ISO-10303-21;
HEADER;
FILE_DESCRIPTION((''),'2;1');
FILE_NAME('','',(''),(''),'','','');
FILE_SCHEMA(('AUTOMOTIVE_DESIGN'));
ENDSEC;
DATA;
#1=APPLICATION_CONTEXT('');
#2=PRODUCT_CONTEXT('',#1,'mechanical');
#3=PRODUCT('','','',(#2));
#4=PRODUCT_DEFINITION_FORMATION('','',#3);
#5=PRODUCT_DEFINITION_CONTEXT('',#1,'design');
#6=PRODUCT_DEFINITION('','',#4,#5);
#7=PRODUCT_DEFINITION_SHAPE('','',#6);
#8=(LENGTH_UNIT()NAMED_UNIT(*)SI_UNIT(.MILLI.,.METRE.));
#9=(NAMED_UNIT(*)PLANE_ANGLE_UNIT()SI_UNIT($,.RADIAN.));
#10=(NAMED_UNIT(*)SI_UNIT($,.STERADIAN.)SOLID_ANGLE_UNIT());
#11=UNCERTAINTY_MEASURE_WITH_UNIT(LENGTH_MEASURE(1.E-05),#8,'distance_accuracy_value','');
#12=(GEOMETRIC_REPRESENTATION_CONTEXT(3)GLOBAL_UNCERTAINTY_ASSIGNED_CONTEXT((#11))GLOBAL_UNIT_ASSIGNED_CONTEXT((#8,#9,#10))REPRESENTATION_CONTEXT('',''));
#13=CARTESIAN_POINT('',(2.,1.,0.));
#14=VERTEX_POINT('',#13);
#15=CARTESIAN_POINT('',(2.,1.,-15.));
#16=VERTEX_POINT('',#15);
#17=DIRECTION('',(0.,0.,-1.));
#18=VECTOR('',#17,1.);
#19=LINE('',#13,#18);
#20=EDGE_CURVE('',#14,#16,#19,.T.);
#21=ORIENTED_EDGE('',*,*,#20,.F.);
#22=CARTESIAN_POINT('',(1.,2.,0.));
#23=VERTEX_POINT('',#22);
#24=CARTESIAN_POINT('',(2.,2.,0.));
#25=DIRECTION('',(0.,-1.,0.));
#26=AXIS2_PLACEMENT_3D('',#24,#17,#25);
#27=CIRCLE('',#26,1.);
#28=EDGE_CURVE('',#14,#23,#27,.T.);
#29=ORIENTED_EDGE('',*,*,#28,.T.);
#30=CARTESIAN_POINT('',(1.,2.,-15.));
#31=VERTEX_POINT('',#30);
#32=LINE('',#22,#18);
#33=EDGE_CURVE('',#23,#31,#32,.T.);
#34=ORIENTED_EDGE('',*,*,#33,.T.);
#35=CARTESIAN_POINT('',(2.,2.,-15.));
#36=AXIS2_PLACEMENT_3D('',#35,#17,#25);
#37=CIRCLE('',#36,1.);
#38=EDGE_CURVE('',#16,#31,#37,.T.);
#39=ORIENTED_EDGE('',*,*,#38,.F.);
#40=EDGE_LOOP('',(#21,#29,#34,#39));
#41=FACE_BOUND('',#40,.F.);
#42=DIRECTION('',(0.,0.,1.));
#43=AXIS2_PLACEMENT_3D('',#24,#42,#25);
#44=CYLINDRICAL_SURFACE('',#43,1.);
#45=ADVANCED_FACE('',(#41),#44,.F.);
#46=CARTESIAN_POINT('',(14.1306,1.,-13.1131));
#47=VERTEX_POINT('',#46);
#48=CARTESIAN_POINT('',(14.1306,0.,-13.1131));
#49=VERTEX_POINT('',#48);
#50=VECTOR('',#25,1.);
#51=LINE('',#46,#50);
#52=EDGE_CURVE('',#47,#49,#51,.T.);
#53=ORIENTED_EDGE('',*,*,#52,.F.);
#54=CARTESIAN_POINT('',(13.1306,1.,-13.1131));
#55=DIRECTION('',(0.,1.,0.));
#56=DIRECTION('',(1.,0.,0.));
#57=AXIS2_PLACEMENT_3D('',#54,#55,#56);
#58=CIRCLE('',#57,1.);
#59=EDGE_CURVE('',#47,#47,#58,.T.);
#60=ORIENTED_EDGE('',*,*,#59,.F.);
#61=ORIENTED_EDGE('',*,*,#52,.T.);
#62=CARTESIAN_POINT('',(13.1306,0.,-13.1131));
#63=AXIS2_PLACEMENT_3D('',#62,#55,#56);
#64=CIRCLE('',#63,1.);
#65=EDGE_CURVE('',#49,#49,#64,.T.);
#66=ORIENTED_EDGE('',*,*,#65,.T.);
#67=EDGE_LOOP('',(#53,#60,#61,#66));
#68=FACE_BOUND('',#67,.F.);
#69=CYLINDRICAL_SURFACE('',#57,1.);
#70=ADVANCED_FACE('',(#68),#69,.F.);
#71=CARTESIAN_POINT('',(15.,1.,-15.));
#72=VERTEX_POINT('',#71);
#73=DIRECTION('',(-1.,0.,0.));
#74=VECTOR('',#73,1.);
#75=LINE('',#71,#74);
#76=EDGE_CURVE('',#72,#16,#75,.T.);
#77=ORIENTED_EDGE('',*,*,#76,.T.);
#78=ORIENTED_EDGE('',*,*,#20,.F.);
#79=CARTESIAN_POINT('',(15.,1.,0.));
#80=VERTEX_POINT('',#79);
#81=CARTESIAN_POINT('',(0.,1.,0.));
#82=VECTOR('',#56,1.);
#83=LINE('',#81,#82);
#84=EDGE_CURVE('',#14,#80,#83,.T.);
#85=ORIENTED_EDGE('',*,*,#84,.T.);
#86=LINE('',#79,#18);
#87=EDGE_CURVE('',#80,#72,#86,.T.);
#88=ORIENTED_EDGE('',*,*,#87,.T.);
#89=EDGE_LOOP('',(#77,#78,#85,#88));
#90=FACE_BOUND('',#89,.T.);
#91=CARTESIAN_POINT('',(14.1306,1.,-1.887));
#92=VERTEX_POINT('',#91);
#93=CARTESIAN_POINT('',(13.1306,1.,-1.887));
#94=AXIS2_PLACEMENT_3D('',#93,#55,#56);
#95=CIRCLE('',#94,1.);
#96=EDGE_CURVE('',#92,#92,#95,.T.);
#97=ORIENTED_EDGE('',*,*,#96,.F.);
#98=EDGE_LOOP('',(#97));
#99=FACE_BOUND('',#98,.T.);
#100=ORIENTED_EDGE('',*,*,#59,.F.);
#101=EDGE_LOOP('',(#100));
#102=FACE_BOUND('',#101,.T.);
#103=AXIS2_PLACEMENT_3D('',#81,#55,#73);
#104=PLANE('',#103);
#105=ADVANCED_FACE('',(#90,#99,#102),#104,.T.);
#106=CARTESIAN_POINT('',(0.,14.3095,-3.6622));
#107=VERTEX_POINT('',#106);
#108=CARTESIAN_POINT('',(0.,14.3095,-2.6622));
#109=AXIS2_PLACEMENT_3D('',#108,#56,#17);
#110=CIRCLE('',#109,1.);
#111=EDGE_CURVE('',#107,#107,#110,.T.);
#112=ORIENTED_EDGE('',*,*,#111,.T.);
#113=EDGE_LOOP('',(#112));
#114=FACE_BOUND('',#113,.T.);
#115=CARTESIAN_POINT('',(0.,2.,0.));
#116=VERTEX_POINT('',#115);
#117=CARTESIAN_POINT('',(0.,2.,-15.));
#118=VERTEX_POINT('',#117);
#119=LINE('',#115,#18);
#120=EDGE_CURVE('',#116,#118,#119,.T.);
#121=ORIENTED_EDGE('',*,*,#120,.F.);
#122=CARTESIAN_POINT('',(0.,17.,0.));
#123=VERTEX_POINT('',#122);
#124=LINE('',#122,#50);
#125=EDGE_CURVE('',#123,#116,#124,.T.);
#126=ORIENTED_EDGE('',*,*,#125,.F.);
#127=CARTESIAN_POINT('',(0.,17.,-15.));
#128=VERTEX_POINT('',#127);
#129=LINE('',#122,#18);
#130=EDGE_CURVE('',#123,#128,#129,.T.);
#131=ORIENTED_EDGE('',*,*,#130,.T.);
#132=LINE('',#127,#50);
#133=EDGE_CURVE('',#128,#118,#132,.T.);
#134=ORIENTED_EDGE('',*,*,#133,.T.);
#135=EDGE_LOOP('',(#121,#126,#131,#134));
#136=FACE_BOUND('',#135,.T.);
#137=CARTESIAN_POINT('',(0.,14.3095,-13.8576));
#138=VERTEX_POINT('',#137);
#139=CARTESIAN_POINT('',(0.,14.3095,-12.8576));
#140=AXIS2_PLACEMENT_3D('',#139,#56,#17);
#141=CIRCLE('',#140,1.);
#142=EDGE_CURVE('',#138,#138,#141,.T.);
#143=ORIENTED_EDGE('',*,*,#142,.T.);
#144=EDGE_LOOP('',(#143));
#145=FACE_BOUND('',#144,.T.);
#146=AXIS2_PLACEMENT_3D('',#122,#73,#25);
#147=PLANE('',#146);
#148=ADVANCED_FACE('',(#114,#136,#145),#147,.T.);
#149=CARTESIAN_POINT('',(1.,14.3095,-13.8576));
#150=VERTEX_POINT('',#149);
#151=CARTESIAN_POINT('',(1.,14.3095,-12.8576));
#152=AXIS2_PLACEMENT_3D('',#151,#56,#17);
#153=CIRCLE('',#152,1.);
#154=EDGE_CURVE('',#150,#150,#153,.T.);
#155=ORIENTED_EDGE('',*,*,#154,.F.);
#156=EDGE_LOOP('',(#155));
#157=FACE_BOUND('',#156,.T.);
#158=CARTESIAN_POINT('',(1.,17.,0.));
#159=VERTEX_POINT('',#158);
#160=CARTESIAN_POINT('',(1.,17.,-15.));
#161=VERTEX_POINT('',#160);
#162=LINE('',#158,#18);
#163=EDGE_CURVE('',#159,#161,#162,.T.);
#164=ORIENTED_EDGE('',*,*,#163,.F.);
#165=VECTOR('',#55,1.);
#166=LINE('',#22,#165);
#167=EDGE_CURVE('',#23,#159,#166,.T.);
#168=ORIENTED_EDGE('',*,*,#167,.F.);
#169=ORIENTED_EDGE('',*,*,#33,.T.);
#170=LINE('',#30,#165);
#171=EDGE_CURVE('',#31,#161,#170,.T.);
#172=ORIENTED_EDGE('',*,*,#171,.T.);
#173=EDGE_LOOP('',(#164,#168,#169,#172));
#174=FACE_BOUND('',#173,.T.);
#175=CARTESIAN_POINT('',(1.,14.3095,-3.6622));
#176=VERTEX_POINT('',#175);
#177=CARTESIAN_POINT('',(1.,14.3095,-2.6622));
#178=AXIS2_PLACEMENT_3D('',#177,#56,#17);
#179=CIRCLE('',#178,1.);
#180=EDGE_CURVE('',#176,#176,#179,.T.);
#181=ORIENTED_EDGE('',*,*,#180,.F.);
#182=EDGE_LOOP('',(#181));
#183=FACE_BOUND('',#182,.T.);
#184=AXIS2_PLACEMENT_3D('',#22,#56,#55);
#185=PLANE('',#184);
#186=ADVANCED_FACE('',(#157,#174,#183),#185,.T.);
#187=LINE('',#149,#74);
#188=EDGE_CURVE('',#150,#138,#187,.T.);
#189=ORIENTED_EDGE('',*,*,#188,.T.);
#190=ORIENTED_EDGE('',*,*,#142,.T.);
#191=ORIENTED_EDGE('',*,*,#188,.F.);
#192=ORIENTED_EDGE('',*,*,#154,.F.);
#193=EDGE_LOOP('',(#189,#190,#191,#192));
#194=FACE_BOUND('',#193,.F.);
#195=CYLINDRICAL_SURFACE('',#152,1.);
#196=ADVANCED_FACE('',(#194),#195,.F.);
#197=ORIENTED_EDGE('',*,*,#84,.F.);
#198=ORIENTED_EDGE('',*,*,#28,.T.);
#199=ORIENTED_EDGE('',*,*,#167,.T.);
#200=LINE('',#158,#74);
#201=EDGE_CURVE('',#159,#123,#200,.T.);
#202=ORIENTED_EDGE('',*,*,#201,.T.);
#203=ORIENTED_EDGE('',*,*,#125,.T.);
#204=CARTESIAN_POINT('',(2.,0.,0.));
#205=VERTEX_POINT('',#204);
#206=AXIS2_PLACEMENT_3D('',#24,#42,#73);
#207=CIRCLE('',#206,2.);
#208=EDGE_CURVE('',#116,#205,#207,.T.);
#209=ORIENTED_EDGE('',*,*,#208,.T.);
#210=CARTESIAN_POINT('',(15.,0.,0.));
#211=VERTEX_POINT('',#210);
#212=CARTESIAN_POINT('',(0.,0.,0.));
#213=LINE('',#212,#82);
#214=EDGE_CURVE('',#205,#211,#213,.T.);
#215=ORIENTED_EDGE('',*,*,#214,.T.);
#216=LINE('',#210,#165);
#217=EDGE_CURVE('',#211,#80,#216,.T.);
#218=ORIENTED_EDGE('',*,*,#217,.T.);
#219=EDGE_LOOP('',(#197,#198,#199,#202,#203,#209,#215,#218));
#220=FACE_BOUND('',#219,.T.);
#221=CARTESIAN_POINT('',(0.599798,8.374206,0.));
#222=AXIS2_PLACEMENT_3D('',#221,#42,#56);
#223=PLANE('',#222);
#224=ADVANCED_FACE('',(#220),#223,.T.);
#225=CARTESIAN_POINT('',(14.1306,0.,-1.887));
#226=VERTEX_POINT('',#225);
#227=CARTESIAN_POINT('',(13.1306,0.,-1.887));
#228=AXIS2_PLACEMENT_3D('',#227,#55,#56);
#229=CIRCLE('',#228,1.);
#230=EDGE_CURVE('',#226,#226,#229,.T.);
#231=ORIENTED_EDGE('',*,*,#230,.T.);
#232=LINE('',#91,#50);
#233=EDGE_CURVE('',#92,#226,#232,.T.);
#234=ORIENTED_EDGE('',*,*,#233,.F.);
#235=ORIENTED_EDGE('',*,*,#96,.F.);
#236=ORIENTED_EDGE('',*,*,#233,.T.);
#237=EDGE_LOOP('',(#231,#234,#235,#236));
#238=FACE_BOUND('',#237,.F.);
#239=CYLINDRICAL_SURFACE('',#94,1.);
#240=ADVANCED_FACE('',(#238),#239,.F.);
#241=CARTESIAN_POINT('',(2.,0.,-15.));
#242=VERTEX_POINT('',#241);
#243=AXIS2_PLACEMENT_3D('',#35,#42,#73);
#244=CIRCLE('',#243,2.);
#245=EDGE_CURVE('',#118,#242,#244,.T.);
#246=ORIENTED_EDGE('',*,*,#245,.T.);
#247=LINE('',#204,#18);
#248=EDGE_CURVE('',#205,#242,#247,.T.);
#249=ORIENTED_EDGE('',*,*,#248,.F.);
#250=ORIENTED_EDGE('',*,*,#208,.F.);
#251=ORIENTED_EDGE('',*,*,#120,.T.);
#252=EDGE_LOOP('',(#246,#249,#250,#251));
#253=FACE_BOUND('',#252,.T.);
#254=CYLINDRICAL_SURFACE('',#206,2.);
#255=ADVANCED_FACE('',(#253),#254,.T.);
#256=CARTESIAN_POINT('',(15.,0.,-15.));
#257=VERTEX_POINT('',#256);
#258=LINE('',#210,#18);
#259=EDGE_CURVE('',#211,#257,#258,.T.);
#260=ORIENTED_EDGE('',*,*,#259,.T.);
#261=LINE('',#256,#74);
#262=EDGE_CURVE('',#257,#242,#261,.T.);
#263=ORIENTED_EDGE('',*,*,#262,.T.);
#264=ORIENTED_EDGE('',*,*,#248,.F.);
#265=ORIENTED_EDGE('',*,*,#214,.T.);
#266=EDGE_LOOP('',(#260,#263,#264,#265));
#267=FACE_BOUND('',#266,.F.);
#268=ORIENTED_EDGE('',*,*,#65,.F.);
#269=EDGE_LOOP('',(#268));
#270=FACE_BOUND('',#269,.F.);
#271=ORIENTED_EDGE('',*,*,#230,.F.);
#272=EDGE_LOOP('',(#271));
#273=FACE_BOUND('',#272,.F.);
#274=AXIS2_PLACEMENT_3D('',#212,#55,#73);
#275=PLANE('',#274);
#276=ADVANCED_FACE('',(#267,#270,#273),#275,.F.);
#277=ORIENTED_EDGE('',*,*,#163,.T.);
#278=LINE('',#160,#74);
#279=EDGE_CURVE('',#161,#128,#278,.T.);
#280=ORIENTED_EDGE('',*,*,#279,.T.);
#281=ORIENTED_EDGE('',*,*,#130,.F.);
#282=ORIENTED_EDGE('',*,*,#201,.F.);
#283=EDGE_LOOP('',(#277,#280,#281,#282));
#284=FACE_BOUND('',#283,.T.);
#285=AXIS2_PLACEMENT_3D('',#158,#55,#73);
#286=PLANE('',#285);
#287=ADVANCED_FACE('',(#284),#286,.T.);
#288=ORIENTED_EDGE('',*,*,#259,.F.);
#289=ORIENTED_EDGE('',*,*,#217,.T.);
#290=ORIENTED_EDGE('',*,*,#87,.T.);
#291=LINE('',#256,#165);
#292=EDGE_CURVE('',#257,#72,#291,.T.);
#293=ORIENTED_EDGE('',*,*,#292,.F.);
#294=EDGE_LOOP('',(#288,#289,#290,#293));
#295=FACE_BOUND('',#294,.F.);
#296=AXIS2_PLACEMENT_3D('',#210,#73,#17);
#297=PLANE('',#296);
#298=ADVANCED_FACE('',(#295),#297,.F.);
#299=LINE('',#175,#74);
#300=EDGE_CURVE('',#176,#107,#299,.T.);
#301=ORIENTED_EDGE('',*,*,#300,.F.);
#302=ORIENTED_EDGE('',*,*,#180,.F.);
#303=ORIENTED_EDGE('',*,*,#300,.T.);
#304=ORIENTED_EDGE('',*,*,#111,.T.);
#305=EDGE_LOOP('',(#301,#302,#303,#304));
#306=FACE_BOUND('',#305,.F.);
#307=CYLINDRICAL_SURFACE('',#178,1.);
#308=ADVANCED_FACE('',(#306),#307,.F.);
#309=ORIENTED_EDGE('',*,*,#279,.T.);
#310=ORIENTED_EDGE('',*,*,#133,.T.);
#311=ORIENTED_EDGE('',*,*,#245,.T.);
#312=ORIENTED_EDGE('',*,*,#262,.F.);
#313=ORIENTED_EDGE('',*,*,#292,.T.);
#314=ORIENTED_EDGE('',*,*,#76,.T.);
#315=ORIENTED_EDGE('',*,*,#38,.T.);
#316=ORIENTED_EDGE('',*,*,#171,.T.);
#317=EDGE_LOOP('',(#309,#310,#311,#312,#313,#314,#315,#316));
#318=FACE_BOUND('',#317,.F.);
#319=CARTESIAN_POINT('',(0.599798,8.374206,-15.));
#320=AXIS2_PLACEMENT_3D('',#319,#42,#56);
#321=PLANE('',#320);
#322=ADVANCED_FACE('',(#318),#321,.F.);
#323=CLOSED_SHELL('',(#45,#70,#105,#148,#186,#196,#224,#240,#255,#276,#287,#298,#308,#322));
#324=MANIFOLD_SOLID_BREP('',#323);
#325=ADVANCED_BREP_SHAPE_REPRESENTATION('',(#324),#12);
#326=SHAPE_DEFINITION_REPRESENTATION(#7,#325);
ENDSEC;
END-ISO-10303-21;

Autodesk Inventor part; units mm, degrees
ref_plane "YZ Plane" through (0, 0, 0) normal (1, 0, 0) x (0, 1, 0)
ref_plane "XZ Plane" through (0, 0, 0) normal (0, 1, 0) x (-1, 0, 0)
ref_plane "XY Plane" through (0, 0, 0) normal (0, 0, 1) x (1, 0, 0)
sketch "Sketch1" plane through (0, 0, 0) normal (0, 1, 0) x (-1, 0, 0)
  line L0 (0, 0) -> (-15, 0)
  line L1 (-15, 0) -> (-15, -15)
  line L2 (-15, -15) -> (0, -15)
  line L3 (0, -15) -> (0, 0)
extrude "Plate1" add sketch "Sketch1" along normal blind 1
sketch "Sketch2" plane through (1, 0, 0) normal (-1, 0, 0) x (0, -1, 0)
  line L0 (0, -15) -> (0, 0)
  line L1 (0, 0) -> (-17, 0)
  line L2 (-17, 0) -> (-17, -15)
  line L3 (-17, -15) -> (0, -15)
edge flange "Flange1" height 17 angle 90 thickness 1 bend radius 1 thickness toward (-1, 0, 0) relief tear relief width 1 relief depth 0.5 edges at (0, 1, -7.5) wall of the first edge with corners at (1, 0, -15) (1, 0, 0) (1, 17, 0) (1, 17, -15)
bend "Bend1"
corner "Corner1"
sketch "Sketch3" plane through (0, 1, 0) normal (0, 1, 0) x (1, 0, 0)
  circle A0 centre (13.1306, 13.1131) radius 1
  line L0 (2, 15) -> (15, 15) projected
  circle A1 centre (13.1306, 1.887) radius 1
  point P0 (0, 0)
extrude "Extrusion1" cut sketch "Sketch3" against normal through all
sketch "Sketch4" plane through (1, 17, 0) normal (1, 0, 0) x (0, 0, -1)
  circle A0 centre (2.6622, -2.6905) radius 1
  circle A1 centre (12.8576, -2.6905) radius 1
  point P0 (0, -17)
extrude "Extrusion2" cut sketch "Sketch4" against normal blind 10
equation "\"d2\" = Thickness"
equation "\"d3\" = BendReliefWidth"
equation "\"d4\" = BendReliefDepth"
equation "\"d5\" = MinimumRemnant"
equation "\"d6\" = TransitionRadius"
equation "\"d9\" = BendRadius"
equation "\"d10\" = CornerReliefSize"
equation "\"d11\" = GapSize"
equation "\"d12\" = JacobiRadiusSize"
equation "\"BendRadius\" = Thickness"
equation "\"BendReliefWidth\" = Thickness"
equation "\"BendReliefDepth\" = 0.5 * Thickness"
equation "\"CornerReliefSize\" = 4 * Thickness"
equation "\"MinimumRemnant\" = 2 * Thickness"
equation "\"TransitionRadius\" = BendRadius"
equation "\"JacobiRadiusSize\" = BendRadius"
equation "\"GapSize\" = Thickness"
equation "\"Thickness\" = 1"
properties part number "Clamps"
